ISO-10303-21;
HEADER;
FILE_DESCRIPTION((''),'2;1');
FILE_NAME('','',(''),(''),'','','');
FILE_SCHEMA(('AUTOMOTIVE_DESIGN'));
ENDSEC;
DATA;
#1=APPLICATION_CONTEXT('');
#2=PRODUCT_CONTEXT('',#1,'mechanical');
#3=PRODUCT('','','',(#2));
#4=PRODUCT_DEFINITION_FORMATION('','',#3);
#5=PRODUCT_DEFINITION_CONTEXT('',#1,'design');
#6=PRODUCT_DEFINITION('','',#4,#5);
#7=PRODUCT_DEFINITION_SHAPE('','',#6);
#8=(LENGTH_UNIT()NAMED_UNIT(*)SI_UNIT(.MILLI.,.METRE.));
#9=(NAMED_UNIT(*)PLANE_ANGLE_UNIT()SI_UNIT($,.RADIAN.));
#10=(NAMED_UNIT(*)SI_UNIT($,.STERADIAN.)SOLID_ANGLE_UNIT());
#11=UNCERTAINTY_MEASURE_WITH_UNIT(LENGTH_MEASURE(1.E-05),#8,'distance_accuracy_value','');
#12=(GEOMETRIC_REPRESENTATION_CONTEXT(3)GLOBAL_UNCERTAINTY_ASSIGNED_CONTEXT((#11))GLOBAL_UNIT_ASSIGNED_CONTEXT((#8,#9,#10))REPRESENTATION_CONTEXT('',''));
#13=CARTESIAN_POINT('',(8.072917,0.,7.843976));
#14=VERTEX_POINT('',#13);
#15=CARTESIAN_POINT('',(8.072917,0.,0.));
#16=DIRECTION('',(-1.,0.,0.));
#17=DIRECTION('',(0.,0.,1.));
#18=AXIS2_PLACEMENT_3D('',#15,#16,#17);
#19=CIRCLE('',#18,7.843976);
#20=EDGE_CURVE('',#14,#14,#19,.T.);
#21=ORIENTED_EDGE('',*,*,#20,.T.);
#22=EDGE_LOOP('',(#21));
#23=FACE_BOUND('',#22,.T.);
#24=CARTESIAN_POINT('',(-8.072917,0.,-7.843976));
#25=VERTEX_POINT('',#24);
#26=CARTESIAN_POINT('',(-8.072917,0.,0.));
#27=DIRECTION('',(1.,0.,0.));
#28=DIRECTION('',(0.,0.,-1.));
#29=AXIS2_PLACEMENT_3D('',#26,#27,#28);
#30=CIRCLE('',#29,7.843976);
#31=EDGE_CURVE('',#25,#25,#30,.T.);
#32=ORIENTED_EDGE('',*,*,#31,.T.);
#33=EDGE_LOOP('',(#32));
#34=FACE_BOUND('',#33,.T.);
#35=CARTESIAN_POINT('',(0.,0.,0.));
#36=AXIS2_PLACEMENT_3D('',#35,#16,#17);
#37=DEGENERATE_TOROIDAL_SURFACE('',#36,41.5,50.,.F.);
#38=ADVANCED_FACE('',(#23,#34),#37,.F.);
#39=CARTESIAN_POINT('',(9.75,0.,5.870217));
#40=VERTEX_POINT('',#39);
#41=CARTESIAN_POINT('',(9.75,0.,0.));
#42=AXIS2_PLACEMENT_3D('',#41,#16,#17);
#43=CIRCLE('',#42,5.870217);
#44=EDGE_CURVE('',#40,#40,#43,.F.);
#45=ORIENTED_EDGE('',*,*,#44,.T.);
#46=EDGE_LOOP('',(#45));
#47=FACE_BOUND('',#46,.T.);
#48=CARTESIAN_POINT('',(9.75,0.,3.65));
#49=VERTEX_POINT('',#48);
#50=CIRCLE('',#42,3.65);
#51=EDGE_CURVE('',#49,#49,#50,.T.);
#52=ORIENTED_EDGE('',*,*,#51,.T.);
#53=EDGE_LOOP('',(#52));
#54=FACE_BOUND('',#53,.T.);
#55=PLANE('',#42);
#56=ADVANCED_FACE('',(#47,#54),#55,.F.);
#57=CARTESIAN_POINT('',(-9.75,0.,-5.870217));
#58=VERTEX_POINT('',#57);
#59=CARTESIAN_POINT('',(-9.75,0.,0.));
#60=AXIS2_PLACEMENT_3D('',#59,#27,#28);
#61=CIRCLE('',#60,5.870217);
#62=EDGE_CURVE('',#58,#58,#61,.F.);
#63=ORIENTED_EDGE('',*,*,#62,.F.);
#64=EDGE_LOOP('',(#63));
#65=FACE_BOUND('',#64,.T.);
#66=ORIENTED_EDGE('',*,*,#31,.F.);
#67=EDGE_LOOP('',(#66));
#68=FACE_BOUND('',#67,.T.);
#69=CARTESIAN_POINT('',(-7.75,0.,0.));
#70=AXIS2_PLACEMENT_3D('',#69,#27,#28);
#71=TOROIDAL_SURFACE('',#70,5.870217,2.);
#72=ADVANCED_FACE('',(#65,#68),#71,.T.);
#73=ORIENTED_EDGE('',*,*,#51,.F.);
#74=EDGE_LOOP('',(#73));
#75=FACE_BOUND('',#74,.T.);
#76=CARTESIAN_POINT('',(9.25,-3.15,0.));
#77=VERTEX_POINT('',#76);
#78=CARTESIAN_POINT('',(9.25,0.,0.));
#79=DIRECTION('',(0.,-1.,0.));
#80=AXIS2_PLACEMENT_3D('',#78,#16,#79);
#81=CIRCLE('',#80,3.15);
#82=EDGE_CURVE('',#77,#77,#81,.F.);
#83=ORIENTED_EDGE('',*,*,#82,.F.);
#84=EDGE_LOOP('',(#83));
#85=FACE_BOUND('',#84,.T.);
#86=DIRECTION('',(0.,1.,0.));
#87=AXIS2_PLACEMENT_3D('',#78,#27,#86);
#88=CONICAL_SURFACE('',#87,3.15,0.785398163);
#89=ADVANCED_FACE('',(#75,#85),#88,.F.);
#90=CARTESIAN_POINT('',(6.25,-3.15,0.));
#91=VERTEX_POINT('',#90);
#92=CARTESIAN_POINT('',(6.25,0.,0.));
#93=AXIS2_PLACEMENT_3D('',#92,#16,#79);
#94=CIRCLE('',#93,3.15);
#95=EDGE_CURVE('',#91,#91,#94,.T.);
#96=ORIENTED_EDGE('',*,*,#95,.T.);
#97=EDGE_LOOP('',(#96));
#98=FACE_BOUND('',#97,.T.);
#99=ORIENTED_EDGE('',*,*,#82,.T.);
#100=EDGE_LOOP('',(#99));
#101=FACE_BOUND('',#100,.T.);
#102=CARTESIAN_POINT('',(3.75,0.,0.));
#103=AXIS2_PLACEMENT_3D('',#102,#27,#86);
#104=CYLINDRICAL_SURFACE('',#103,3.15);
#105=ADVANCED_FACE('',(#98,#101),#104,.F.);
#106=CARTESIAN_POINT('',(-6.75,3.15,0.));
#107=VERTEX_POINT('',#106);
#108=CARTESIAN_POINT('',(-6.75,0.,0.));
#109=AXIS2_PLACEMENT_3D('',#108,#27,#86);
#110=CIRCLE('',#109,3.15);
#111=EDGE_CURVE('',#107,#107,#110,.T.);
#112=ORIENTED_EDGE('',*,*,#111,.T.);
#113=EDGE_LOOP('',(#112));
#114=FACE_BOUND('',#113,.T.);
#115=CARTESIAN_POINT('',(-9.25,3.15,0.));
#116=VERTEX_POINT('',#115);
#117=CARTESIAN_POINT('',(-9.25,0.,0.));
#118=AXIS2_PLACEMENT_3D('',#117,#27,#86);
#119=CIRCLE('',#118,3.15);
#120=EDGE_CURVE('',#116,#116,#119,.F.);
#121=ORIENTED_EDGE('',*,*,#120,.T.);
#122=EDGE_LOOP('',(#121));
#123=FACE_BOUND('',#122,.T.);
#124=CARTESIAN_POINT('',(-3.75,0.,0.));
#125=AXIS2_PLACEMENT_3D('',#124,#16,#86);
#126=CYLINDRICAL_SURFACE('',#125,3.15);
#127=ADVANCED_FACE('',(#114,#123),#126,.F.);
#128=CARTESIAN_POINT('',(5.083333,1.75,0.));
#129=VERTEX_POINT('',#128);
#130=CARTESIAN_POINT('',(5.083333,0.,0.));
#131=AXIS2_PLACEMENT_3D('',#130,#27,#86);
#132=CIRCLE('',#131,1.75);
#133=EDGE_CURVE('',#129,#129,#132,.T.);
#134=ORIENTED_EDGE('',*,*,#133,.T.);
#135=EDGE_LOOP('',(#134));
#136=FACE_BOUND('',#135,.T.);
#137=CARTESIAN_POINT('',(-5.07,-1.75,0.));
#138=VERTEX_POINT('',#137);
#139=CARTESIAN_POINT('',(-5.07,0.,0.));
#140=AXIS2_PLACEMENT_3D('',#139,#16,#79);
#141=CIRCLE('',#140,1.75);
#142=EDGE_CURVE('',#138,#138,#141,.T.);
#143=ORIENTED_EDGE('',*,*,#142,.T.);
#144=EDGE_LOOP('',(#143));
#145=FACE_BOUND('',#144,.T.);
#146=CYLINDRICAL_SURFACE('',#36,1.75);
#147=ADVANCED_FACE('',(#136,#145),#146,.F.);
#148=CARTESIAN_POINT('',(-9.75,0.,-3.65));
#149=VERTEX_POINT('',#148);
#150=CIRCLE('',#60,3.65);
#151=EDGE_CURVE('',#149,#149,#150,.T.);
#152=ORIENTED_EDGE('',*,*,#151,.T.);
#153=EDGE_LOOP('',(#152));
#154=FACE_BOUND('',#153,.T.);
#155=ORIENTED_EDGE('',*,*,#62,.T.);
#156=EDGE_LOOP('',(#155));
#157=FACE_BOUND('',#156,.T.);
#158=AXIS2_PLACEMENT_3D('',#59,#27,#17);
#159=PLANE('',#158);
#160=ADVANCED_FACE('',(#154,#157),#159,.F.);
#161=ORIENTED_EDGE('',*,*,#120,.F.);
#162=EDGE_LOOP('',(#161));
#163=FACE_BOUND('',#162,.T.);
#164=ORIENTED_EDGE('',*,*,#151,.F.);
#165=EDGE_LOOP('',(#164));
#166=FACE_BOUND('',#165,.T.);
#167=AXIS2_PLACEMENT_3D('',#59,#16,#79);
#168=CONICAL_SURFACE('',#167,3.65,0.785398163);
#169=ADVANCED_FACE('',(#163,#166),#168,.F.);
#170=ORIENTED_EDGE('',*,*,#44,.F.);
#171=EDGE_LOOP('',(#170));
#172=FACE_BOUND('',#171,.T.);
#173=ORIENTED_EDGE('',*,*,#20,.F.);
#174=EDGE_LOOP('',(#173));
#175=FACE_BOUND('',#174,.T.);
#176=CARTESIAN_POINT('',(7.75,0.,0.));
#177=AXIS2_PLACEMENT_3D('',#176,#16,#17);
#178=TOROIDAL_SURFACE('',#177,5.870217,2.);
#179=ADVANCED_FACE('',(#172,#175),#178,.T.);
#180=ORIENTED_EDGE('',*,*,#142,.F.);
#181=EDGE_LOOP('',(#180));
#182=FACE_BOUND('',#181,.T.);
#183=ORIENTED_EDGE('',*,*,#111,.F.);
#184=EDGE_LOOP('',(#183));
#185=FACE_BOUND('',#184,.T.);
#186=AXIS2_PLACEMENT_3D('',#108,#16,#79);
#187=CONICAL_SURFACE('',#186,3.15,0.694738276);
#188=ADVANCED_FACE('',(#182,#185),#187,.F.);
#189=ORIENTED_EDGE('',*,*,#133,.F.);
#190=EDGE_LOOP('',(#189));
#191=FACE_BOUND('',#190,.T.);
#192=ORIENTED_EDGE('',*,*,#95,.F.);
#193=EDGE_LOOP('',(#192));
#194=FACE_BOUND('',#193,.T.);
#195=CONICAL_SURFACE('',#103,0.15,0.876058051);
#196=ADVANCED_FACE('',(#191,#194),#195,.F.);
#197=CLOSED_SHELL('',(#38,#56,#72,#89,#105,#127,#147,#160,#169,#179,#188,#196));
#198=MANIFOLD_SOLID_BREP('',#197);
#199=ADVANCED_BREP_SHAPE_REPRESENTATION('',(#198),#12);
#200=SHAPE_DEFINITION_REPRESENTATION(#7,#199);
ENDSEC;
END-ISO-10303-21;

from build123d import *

# Parameters (mm, degrees)
SKETCH3_W            = 6
SKETCH3_H            = 3.15
FILLET1_R            = 2
FILLET1_OF_MIRROR1_R = 2
CHAMFER2_SIZE        = 0.5
CHAMFER3_SIZE        = 3
CHAMFER3_SIZE_2      = 2.5


# Read off the part's stored shape, not the designer's step: Mirror5
with BuildPart() as part:
    # Sketch1 → Revolve2 (revolve)
    with BuildSketch(Plane.XY, mode=Mode.PRIVATE) as revolve2_sk:
        with BuildLine():
            Line((0, 1.75), (9.75, 1.75))
            Line((9.75, 1.75), (9.75, 7.540162112))
            ThreePointArc((9.75, 7.540162112), (4.89856583, 8.259461943), (0, 8.5))
            Line((0, 8.5), (0, 1.75))
        make_face()
    revolve2 = revolve(revolve2_sk.sketch.rotate(Axis((0, 0, 0), (1, 0, 0)), 90), axis=Axis((0, 0, 0), (1, 0, 0)))

    # Sketch3 → Cut-Revolve1 (revolve, cut)
    with BuildSketch(Plane.XY, mode=Mode.PRIVATE) as cut_revolve1_sk:
        with Locations((6.75, 1.575)):
            Rectangle(SKETCH3_W, SKETCH3_H)
    revolve(cut_revolve1_sk.sketch.rotate(Axis((3.75, 0, 0), (-1, 0, 0)), 270), axis=Axis((3.75, 0, 0), (-1, 0, 0)), mode=Mode.SUBTRACT)

    # Fillet1
    fillet1_edges = [part.edges().sort_by_distance(p)[0] for p in [
        (9.75, 0, -7.540162112),
    ]]
    fillet(fillet1_edges, radius=FILLET1_R)

    # Mirror1: Revolve2 across plane
    add(revolve2.mirror(Plane(origin=(0, 0, 0), x_dir=(0, 0, 1), z_dir=(1, 0, 0))))

    # Fillet1 of Mirror1
    fillet1_of_mirror1_edges = [part.edges().sort_by_distance(p)[0] for p in [
        (-9.75, 0, -7.540162112),
    ]]
    fillet(fillet1_of_mirror1_edges, radius=FILLET1_OF_MIRROR1_R)

    # Chamfer2
    chamfer2_edges = [part.edges().sort_by_distance(p)[0] for p in [
        (9.75, 0, -3.15),
    ]]
    chamfer(chamfer2_edges, length=CHAMFER2_SIZE)

    # Mirror5 outline → Mirror5 (revolve, cut)
    with BuildSketch(Plane.YX):
        Polygon((3.15, -9.25), (3.15, -3.75), (1.75, -3.75), (1.75, -9.75), (3.65, -9.75), align=None)
    revolve(axis=Axis((0, 0, 0), (1, 0, 0)), mode=Mode.SUBTRACT)

    # Chamfer3
    # the kernel refuses this chamfer: 3, 2.5 mm, written as the material it adds along each edge
    with BuildSketch(Plane(origin=(-3.75, 0, 0), x_dir=(0, 1, 0), z_dir=(0, 0, -1))) as chamfer3_piece_1_section:
        Polygon((3.15, -CHAMFER3_SIZE), (3.15 - CHAMFER3_SIZE_2, 0), (3.15, 0), align=None)
    chamfer3_piece_1 = revolve(axis=Axis((-3.75, 0, 0), (1, 0, 0)), mode=Mode.PRIVATE)
    chamfer3_piece_1 = chamfer3_piece_1 - Plane(origin=(-5.931911747, 0, 0), x_dir=(0, 0, 1), z_dir=(1, 0, 0)) * Cylinder(1.75, 13, mode=Mode.PRIVATE)
    add(chamfer3_piece_1)
    with BuildSketch(Plane(origin=(3.75, 0, 0), x_dir=(0, 0, 1), z_dir=(0, -1, 0))) as chamfer3_piece_2_section:
        Polygon((3.15 - CHAMFER3_SIZE, 0), (3.15, -CHAMFER3_SIZE_2), (3.15, 0), align=None)
    chamfer3_piece_2 = revolve(axis=Axis((3.75, 0, 0), (-1, 0, 0)), mode=Mode.PRIVATE)
    chamfer3_piece_2 = chamfer3_piece_2 - Plane(origin=(5.677253333, 0, 0), x_dir=(0, 0, 1), z_dir=(1, 0, 0)) * Cylinder(1.75, 13, mode=Mode.PRIVATE)
    add(chamfer3_piece_2)


solid = part.part
